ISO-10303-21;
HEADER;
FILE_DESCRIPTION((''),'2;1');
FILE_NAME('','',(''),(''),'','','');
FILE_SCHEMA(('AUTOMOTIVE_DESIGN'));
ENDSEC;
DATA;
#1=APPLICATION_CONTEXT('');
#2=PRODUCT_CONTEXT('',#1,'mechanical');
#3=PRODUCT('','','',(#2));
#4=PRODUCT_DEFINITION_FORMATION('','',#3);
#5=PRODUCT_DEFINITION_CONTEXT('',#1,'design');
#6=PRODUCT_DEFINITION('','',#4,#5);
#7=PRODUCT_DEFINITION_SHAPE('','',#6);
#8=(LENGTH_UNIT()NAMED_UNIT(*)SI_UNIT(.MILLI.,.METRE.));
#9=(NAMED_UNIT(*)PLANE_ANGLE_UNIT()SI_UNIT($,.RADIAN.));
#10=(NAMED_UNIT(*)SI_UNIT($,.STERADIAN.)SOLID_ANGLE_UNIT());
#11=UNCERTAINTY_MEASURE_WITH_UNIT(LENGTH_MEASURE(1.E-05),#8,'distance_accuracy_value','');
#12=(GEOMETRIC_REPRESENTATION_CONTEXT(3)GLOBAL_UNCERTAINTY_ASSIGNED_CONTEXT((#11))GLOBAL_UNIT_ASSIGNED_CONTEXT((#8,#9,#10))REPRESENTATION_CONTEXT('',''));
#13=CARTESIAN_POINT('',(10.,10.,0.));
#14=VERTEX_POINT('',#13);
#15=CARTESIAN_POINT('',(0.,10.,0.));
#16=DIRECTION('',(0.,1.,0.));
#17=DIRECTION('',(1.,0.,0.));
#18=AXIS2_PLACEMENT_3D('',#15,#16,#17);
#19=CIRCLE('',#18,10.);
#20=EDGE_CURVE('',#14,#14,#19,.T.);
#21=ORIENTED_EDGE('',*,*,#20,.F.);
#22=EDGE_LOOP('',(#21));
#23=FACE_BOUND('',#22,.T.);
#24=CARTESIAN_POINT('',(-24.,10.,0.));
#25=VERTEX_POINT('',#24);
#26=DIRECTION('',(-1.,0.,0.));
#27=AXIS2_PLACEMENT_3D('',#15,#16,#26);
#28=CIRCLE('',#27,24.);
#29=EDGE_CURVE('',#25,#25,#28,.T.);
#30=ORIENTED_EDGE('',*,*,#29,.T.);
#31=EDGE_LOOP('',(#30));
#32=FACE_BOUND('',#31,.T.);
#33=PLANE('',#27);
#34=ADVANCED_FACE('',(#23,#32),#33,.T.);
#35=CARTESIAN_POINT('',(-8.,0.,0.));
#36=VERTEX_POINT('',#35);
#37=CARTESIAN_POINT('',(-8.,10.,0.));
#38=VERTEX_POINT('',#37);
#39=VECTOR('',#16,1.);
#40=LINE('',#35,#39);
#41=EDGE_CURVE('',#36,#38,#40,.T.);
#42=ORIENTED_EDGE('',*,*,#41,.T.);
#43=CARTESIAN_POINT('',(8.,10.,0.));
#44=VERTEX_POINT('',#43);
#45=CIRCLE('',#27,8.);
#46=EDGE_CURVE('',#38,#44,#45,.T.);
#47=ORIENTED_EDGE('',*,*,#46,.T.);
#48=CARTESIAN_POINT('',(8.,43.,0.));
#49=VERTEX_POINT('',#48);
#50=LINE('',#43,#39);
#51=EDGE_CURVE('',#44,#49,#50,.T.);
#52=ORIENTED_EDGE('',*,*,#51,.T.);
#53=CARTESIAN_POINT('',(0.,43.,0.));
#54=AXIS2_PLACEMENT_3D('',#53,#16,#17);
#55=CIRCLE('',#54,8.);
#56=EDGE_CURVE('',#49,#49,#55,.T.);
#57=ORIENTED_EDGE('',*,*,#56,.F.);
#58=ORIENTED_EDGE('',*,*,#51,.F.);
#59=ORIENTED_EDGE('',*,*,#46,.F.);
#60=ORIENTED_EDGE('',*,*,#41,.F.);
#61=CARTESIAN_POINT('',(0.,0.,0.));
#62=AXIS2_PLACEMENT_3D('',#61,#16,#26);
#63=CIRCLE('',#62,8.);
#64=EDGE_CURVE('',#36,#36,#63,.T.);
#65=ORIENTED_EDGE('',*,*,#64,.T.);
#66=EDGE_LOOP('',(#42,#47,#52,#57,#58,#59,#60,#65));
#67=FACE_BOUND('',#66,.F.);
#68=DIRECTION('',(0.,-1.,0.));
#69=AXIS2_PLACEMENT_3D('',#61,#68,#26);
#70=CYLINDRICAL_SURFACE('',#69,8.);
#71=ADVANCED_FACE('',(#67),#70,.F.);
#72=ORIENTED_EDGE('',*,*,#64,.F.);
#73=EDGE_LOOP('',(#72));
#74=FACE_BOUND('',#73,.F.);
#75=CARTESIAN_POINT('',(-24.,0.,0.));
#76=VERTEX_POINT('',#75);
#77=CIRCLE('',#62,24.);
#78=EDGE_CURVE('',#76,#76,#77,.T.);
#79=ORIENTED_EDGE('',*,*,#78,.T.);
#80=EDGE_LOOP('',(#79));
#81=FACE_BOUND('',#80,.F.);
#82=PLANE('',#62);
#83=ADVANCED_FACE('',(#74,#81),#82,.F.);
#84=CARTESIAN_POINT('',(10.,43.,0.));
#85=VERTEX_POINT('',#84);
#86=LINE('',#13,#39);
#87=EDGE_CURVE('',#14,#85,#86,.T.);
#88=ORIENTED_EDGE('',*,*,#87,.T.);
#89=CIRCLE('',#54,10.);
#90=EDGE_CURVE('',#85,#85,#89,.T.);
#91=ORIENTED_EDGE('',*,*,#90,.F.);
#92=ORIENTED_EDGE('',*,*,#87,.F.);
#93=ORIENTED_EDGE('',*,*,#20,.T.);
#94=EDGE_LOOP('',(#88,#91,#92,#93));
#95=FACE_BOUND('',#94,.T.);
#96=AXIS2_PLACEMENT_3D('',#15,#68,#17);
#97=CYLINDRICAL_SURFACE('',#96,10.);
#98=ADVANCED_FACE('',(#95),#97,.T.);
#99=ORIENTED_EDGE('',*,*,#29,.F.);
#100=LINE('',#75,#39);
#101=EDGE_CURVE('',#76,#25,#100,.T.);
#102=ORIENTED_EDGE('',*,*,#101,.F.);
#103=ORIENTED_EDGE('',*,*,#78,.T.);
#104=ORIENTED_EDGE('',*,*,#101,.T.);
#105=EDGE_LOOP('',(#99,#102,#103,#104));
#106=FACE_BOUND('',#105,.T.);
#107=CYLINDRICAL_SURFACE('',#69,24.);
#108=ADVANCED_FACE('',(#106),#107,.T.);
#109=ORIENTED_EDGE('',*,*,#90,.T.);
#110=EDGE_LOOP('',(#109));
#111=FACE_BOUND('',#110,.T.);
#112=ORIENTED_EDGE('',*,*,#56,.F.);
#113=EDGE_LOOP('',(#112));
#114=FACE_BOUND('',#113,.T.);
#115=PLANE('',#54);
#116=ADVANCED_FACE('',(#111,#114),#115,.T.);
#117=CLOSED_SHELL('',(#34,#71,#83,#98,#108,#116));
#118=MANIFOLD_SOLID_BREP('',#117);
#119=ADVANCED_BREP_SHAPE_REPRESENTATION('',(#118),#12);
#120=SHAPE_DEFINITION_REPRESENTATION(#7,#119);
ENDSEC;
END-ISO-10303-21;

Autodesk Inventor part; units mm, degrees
ref_plane "YZ Plane" through (0, 0, 0) normal (1, 0, 0) x (0, 1, 0)
ref_plane "XZ Plane" through (0, 0, 0) normal (0, 1, 0) x (-1, 0, 0)
ref_plane "XY Plane" through (0, 0, 0) normal (0, 0, 1) x (1, 0, 0)
sketch "Sketch1" plane through (0, 0, 0) normal (0, 1, 0) x (-1, 0, 0)
  circle A0 centre (0, 0) radius 8
  circle A1 centre (0, 0) radius 24
  dimension "d0" = 16
  dimension "d1" = 48
extrude "Extrusion1" add sketch "Sketch1" along normal blind 10
sketch "Sketch4" plane through (0, 10, 0) normal (0, 1, 0) x (1, 0, 0)
  circle A0 centre (0, 0) radius 8 projected
  circle A1 centre (0, 0) radius 8 projected
  circle A2 centre (0, 0) radius 24 projected
  circle A3 centre (0, 0) radius 10
  dimension "d8" = 20
  dimension "d9" = 16
extrude "Extrusion3" add sketch "Sketch4" along normal blind 33 contours A3
properties part number "Nut"
